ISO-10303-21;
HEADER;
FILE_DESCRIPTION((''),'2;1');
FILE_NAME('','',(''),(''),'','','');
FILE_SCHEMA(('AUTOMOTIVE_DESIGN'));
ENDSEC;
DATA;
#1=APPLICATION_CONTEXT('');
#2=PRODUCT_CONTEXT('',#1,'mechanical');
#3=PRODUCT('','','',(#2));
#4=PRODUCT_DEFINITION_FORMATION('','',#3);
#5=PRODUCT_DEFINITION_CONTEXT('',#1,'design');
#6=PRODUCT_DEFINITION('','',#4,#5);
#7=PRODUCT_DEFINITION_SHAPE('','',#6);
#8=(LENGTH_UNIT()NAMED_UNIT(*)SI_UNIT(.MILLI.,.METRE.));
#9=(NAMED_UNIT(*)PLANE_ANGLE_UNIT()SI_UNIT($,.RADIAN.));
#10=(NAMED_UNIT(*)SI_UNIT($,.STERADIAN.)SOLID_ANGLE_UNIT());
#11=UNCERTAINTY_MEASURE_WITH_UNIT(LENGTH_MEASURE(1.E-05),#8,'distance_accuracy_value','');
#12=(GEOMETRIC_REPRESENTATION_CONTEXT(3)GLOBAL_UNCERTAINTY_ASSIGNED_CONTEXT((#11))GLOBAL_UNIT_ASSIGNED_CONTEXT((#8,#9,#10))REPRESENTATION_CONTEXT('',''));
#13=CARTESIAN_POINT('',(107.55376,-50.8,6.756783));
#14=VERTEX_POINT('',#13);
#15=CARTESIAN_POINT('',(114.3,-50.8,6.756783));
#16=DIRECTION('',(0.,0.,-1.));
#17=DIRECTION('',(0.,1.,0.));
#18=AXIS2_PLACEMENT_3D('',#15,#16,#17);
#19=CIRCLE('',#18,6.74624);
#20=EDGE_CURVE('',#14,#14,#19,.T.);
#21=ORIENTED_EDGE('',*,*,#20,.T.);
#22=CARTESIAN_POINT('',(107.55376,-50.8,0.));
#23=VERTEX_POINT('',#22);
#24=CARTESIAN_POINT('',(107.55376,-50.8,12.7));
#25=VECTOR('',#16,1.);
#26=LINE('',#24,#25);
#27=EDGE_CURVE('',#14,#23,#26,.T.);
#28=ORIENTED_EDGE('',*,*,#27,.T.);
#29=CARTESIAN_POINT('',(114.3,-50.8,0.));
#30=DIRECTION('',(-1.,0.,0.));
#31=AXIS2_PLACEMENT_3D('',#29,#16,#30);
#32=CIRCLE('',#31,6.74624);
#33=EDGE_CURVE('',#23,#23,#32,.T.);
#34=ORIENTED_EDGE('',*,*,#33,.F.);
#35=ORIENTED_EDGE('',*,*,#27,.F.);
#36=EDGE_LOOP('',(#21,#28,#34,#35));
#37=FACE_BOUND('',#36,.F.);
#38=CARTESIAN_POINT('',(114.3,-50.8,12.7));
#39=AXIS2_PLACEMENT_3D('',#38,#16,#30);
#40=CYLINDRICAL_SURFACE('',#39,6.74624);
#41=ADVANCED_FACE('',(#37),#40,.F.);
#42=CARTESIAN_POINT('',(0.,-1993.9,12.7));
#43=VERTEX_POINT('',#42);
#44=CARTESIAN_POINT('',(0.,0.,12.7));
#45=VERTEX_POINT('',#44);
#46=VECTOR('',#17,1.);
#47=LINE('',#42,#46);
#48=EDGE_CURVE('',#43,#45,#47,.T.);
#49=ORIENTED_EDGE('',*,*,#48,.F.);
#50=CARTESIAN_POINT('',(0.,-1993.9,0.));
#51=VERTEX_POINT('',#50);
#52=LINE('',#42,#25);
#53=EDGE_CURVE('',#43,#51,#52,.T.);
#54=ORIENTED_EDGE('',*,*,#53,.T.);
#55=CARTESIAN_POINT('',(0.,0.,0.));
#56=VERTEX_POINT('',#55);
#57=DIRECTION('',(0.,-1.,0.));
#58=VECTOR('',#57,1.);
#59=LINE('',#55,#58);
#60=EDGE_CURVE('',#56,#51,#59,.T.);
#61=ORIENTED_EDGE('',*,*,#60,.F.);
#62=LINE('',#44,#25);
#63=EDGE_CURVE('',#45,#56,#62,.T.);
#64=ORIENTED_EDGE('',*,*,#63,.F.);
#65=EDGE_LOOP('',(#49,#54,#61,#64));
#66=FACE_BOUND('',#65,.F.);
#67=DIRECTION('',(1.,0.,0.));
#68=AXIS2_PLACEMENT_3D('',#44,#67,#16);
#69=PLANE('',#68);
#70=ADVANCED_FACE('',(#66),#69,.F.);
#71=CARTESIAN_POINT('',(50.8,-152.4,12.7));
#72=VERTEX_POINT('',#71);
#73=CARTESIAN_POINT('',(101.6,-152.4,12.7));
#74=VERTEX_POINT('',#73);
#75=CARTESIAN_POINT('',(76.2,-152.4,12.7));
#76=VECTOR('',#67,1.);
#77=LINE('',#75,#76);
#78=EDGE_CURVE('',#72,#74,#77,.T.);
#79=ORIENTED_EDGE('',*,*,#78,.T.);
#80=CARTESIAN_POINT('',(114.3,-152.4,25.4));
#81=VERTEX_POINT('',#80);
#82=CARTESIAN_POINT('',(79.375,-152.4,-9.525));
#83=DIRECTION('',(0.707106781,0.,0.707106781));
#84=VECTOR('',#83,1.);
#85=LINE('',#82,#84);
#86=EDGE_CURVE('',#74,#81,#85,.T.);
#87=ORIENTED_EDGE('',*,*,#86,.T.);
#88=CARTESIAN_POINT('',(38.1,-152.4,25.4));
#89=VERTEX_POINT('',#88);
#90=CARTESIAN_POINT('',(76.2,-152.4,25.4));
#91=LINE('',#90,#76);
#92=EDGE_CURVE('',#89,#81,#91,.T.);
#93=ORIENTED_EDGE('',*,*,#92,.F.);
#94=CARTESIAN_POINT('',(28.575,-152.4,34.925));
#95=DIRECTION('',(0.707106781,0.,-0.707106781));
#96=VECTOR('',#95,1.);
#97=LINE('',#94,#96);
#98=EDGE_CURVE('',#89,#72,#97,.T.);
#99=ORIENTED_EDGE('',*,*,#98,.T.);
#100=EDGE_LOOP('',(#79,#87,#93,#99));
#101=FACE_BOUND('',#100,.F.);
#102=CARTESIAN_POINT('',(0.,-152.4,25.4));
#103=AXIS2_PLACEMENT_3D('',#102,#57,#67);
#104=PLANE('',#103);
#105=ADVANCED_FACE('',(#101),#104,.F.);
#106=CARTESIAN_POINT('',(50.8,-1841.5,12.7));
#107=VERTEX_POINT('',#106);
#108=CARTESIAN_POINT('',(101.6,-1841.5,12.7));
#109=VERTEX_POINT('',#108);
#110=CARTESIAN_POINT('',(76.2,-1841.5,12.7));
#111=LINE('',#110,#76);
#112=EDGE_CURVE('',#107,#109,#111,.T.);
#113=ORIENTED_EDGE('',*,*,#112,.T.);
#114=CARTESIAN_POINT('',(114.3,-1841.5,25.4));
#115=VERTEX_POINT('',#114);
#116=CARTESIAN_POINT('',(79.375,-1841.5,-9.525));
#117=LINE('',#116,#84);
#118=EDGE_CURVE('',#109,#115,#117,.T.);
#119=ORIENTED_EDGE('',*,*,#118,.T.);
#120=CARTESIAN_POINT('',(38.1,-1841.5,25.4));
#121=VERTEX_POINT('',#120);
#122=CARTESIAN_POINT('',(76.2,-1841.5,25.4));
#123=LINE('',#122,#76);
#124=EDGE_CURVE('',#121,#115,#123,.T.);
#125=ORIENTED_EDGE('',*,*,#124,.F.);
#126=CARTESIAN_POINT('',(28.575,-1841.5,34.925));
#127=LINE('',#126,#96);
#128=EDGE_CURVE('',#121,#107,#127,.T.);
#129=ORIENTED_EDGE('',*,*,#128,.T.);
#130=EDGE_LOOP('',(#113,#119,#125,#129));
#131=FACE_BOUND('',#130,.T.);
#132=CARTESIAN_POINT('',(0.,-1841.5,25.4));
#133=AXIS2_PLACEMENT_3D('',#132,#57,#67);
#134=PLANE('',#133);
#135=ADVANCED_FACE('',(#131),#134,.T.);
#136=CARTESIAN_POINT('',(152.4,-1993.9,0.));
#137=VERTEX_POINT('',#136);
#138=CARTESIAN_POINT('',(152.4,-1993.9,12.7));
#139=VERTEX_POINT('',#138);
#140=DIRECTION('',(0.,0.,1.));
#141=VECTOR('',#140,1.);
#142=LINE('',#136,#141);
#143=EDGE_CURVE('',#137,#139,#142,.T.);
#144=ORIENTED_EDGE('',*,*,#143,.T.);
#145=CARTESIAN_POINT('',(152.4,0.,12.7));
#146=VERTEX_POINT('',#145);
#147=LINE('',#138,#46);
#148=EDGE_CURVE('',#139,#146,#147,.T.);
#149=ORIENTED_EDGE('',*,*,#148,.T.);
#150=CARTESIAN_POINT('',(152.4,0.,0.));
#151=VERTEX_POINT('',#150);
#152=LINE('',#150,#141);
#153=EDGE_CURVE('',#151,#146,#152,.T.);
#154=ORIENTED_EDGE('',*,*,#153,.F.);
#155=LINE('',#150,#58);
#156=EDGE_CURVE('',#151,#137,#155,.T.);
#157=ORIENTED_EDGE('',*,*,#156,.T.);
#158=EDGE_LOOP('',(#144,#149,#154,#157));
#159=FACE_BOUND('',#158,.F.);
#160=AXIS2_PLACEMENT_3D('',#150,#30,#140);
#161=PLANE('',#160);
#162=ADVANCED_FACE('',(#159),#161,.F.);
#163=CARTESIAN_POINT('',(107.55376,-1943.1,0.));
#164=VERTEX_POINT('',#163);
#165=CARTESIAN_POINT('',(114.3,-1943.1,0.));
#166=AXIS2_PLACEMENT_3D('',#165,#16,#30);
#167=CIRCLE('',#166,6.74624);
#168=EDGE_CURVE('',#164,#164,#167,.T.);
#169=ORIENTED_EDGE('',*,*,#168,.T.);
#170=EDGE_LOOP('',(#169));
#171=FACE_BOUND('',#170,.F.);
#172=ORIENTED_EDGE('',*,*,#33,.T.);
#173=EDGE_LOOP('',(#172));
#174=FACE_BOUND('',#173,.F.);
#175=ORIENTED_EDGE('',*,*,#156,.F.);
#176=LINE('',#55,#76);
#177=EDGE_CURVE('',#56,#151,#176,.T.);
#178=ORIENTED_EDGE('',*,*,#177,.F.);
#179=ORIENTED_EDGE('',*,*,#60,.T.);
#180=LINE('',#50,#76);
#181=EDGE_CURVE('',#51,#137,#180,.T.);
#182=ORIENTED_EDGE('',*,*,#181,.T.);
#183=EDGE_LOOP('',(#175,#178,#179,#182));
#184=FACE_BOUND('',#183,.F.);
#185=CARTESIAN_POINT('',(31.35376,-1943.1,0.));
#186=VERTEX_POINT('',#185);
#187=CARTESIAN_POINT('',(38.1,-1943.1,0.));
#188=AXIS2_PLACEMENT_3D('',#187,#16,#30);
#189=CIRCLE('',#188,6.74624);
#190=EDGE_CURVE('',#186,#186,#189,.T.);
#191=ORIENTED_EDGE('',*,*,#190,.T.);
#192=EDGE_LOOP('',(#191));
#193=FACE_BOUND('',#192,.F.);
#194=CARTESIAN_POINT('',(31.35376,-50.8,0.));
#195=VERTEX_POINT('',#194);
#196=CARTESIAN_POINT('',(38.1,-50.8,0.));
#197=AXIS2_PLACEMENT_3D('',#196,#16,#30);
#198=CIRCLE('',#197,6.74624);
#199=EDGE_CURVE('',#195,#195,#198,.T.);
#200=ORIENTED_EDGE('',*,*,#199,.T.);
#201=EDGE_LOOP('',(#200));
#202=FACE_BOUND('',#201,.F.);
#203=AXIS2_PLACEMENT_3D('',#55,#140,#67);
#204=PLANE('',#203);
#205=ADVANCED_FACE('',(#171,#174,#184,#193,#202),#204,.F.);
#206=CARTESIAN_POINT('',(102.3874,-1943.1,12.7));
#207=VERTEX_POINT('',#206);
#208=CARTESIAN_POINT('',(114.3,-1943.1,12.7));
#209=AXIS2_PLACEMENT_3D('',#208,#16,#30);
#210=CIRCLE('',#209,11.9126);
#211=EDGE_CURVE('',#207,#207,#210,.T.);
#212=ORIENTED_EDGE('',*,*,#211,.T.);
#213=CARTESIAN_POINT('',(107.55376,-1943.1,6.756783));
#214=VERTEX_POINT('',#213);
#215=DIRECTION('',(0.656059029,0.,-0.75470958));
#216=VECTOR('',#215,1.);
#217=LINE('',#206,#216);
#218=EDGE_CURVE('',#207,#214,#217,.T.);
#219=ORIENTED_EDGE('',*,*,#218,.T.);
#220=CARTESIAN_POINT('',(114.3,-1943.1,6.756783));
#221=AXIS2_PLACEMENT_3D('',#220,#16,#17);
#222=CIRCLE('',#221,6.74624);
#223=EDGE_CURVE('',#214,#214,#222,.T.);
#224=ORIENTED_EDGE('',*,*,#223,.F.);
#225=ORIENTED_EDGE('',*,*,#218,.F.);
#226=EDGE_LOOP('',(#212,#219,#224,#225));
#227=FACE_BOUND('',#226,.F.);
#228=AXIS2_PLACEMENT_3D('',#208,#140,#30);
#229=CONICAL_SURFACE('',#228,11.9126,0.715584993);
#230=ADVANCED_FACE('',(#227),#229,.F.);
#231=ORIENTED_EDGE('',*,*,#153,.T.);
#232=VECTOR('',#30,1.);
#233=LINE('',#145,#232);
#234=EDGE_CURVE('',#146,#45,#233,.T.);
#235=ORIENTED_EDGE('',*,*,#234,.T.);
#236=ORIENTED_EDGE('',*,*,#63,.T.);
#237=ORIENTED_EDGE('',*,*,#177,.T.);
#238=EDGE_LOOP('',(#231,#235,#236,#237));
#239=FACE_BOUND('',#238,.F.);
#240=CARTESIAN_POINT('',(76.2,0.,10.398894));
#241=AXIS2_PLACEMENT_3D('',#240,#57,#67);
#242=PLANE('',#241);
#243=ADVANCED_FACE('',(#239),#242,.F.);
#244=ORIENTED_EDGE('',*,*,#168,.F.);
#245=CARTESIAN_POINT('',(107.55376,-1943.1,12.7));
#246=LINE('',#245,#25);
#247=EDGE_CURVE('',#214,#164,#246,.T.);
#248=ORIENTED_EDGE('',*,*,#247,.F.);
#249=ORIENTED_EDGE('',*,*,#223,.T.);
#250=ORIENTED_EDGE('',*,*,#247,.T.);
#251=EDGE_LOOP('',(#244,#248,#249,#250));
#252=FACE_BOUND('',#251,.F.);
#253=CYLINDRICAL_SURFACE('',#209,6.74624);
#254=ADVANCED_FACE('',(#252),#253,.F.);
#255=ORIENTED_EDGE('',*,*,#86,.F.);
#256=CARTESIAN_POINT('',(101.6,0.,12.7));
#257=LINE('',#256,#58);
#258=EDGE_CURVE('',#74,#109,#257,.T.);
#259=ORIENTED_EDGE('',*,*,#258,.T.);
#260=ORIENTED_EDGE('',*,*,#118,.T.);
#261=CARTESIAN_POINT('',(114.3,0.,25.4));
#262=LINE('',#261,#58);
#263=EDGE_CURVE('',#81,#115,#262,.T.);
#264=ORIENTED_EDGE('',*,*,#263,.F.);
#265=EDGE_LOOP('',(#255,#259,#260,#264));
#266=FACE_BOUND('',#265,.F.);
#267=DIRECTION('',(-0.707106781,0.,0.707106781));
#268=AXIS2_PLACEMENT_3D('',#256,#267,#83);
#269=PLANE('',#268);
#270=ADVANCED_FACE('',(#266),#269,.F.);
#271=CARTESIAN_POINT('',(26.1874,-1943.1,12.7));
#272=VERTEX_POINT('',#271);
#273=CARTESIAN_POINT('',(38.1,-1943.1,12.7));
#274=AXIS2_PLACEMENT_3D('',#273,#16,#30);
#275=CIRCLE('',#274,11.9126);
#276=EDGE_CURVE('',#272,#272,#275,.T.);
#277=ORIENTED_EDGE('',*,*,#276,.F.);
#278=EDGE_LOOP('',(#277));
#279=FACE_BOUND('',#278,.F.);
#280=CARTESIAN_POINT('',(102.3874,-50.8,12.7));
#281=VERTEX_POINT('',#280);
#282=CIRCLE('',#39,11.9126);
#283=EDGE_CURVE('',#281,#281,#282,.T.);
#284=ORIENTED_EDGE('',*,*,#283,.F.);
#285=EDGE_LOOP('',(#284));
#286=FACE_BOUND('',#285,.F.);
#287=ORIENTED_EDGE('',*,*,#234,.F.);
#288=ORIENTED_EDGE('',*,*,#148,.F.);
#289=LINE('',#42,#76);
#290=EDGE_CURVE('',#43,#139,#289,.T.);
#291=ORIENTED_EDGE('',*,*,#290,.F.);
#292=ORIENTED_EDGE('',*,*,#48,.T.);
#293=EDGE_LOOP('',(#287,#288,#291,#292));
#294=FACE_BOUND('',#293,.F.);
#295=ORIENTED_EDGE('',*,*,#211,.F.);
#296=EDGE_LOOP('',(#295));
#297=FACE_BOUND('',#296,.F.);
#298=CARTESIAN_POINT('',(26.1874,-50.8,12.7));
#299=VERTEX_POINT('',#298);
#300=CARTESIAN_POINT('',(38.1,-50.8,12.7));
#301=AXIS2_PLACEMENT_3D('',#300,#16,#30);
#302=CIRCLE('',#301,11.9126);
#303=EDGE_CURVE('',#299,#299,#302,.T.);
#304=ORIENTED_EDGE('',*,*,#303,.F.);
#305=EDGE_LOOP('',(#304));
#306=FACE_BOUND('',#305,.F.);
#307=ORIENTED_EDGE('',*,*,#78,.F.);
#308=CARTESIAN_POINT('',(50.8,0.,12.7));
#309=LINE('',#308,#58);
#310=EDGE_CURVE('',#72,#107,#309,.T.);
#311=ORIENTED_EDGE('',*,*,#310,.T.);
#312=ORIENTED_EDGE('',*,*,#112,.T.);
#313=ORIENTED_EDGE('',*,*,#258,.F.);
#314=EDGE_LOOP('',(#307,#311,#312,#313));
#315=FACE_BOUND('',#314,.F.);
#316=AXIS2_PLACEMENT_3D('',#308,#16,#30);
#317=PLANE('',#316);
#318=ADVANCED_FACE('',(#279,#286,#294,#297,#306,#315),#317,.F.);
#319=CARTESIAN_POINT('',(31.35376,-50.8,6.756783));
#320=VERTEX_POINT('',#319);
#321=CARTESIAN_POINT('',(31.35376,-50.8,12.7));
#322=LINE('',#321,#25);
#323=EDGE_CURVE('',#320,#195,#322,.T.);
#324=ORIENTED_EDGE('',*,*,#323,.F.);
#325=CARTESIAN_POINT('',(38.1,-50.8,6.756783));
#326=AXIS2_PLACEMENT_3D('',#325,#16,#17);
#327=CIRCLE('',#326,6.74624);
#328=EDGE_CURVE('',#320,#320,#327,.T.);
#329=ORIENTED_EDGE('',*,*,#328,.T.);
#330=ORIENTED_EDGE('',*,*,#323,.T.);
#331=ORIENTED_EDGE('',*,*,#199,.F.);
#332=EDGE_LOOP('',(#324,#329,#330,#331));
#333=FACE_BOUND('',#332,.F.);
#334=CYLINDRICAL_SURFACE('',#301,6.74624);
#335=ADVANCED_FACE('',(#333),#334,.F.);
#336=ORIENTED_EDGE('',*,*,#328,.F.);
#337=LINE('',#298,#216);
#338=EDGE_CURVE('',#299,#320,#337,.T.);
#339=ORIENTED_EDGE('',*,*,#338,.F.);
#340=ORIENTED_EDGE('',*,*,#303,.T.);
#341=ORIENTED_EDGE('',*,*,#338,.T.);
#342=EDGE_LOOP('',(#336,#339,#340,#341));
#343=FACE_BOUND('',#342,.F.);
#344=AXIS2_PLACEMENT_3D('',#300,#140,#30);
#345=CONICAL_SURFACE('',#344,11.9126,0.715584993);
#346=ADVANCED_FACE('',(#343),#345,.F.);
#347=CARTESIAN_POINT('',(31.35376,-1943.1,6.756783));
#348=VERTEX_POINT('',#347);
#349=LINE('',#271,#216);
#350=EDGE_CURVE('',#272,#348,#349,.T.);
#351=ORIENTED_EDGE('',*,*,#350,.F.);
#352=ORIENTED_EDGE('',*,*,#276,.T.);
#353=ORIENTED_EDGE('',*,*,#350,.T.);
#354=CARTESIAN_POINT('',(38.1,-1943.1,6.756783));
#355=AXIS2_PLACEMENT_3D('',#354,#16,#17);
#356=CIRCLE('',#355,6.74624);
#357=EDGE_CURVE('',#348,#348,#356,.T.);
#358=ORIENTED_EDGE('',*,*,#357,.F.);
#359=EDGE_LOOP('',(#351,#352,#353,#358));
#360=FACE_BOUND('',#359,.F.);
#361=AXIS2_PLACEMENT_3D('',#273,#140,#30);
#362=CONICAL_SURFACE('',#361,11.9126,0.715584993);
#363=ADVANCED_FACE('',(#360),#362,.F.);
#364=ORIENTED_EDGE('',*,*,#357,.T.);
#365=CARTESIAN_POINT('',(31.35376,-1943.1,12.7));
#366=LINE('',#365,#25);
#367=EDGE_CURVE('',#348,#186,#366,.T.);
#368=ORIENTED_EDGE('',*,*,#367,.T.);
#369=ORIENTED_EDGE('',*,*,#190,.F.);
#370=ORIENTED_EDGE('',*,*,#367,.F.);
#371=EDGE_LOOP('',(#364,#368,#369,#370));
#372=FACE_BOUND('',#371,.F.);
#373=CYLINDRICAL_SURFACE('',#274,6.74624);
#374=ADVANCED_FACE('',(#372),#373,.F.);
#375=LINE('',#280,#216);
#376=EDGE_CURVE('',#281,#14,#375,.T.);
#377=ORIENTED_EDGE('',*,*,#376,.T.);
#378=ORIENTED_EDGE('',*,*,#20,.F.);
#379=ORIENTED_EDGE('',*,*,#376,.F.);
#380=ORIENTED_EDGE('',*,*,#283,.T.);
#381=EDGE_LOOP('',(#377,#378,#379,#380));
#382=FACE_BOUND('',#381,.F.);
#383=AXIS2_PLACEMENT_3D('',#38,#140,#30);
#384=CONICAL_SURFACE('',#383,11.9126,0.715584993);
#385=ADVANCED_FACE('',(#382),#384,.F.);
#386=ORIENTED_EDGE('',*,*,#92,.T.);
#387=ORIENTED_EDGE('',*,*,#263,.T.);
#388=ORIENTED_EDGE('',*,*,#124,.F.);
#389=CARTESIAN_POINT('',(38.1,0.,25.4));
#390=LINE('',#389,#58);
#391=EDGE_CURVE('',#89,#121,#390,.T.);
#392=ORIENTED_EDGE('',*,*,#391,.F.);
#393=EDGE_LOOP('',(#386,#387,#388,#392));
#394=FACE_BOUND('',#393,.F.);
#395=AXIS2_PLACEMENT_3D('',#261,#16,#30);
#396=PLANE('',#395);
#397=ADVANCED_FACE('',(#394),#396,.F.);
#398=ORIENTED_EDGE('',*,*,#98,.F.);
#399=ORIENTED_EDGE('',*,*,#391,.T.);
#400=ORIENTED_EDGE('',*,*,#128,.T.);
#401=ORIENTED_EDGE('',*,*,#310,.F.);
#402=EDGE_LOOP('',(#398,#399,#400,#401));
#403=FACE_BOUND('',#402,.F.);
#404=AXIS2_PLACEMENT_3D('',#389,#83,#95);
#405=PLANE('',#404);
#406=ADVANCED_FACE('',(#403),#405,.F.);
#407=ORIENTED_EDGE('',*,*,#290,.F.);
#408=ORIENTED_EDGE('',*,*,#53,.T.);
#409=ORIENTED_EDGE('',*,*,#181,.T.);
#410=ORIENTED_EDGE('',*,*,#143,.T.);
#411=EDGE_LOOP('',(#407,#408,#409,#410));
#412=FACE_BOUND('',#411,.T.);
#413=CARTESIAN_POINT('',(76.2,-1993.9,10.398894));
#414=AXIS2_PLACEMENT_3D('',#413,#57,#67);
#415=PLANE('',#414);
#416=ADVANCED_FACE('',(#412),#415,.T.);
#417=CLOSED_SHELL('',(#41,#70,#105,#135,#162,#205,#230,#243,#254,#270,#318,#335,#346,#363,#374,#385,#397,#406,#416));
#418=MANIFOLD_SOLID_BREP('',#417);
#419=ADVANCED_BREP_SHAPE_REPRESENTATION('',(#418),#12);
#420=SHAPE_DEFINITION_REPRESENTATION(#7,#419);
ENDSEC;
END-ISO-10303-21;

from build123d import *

# Parameters (mm, degrees)
F1_DEPTH       = 1993.9
F2_W           = 152.4
F2_H           = 152.4
F3_DEPTH       = 12.7
F5_D           = 13.49248
F5_CSINK_D     = 23.8252
F5_CSINK_ANGLE = 82


with BuildPart() as f1:
    # F0 (on Front) → F1 (new body)
    with BuildSketch(Plane.XZ):
        Polygon((0, 12.7), (0, 0), (152.4, 0), (152.4, 12.7), (101.6, 12.7), (114.3, 25.4), (38.1, 25.4), (50.8, 12.7), align=None)
    extrude(amount=F1_DEPTH)

    # F2 (on face) → F3 (cut, through all)
    with BuildSketch(Plane.XY.offset(25.4)):
        with Locations((76.2, -76.2)):
            Rectangle(F2_W, F2_H)
        with Locations((76.2, -1917.7)):
            Rectangle(F2_W, F2_H)
    extrude(amount=-F3_DEPTH, mode=Mode.SUBTRACT)

    # F5 (through all)
    with Locations(Plane.XY.offset(12.7)):
        with Locations((38.1, -50.8), (114.3, -50.8), (38.1, -1943.1), (114.3, -1943.1)):
            CounterSinkHole(F5_D / 2, F5_CSINK_D / 2, counter_sink_angle=F5_CSINK_ANGLE)


solid = f1.part
